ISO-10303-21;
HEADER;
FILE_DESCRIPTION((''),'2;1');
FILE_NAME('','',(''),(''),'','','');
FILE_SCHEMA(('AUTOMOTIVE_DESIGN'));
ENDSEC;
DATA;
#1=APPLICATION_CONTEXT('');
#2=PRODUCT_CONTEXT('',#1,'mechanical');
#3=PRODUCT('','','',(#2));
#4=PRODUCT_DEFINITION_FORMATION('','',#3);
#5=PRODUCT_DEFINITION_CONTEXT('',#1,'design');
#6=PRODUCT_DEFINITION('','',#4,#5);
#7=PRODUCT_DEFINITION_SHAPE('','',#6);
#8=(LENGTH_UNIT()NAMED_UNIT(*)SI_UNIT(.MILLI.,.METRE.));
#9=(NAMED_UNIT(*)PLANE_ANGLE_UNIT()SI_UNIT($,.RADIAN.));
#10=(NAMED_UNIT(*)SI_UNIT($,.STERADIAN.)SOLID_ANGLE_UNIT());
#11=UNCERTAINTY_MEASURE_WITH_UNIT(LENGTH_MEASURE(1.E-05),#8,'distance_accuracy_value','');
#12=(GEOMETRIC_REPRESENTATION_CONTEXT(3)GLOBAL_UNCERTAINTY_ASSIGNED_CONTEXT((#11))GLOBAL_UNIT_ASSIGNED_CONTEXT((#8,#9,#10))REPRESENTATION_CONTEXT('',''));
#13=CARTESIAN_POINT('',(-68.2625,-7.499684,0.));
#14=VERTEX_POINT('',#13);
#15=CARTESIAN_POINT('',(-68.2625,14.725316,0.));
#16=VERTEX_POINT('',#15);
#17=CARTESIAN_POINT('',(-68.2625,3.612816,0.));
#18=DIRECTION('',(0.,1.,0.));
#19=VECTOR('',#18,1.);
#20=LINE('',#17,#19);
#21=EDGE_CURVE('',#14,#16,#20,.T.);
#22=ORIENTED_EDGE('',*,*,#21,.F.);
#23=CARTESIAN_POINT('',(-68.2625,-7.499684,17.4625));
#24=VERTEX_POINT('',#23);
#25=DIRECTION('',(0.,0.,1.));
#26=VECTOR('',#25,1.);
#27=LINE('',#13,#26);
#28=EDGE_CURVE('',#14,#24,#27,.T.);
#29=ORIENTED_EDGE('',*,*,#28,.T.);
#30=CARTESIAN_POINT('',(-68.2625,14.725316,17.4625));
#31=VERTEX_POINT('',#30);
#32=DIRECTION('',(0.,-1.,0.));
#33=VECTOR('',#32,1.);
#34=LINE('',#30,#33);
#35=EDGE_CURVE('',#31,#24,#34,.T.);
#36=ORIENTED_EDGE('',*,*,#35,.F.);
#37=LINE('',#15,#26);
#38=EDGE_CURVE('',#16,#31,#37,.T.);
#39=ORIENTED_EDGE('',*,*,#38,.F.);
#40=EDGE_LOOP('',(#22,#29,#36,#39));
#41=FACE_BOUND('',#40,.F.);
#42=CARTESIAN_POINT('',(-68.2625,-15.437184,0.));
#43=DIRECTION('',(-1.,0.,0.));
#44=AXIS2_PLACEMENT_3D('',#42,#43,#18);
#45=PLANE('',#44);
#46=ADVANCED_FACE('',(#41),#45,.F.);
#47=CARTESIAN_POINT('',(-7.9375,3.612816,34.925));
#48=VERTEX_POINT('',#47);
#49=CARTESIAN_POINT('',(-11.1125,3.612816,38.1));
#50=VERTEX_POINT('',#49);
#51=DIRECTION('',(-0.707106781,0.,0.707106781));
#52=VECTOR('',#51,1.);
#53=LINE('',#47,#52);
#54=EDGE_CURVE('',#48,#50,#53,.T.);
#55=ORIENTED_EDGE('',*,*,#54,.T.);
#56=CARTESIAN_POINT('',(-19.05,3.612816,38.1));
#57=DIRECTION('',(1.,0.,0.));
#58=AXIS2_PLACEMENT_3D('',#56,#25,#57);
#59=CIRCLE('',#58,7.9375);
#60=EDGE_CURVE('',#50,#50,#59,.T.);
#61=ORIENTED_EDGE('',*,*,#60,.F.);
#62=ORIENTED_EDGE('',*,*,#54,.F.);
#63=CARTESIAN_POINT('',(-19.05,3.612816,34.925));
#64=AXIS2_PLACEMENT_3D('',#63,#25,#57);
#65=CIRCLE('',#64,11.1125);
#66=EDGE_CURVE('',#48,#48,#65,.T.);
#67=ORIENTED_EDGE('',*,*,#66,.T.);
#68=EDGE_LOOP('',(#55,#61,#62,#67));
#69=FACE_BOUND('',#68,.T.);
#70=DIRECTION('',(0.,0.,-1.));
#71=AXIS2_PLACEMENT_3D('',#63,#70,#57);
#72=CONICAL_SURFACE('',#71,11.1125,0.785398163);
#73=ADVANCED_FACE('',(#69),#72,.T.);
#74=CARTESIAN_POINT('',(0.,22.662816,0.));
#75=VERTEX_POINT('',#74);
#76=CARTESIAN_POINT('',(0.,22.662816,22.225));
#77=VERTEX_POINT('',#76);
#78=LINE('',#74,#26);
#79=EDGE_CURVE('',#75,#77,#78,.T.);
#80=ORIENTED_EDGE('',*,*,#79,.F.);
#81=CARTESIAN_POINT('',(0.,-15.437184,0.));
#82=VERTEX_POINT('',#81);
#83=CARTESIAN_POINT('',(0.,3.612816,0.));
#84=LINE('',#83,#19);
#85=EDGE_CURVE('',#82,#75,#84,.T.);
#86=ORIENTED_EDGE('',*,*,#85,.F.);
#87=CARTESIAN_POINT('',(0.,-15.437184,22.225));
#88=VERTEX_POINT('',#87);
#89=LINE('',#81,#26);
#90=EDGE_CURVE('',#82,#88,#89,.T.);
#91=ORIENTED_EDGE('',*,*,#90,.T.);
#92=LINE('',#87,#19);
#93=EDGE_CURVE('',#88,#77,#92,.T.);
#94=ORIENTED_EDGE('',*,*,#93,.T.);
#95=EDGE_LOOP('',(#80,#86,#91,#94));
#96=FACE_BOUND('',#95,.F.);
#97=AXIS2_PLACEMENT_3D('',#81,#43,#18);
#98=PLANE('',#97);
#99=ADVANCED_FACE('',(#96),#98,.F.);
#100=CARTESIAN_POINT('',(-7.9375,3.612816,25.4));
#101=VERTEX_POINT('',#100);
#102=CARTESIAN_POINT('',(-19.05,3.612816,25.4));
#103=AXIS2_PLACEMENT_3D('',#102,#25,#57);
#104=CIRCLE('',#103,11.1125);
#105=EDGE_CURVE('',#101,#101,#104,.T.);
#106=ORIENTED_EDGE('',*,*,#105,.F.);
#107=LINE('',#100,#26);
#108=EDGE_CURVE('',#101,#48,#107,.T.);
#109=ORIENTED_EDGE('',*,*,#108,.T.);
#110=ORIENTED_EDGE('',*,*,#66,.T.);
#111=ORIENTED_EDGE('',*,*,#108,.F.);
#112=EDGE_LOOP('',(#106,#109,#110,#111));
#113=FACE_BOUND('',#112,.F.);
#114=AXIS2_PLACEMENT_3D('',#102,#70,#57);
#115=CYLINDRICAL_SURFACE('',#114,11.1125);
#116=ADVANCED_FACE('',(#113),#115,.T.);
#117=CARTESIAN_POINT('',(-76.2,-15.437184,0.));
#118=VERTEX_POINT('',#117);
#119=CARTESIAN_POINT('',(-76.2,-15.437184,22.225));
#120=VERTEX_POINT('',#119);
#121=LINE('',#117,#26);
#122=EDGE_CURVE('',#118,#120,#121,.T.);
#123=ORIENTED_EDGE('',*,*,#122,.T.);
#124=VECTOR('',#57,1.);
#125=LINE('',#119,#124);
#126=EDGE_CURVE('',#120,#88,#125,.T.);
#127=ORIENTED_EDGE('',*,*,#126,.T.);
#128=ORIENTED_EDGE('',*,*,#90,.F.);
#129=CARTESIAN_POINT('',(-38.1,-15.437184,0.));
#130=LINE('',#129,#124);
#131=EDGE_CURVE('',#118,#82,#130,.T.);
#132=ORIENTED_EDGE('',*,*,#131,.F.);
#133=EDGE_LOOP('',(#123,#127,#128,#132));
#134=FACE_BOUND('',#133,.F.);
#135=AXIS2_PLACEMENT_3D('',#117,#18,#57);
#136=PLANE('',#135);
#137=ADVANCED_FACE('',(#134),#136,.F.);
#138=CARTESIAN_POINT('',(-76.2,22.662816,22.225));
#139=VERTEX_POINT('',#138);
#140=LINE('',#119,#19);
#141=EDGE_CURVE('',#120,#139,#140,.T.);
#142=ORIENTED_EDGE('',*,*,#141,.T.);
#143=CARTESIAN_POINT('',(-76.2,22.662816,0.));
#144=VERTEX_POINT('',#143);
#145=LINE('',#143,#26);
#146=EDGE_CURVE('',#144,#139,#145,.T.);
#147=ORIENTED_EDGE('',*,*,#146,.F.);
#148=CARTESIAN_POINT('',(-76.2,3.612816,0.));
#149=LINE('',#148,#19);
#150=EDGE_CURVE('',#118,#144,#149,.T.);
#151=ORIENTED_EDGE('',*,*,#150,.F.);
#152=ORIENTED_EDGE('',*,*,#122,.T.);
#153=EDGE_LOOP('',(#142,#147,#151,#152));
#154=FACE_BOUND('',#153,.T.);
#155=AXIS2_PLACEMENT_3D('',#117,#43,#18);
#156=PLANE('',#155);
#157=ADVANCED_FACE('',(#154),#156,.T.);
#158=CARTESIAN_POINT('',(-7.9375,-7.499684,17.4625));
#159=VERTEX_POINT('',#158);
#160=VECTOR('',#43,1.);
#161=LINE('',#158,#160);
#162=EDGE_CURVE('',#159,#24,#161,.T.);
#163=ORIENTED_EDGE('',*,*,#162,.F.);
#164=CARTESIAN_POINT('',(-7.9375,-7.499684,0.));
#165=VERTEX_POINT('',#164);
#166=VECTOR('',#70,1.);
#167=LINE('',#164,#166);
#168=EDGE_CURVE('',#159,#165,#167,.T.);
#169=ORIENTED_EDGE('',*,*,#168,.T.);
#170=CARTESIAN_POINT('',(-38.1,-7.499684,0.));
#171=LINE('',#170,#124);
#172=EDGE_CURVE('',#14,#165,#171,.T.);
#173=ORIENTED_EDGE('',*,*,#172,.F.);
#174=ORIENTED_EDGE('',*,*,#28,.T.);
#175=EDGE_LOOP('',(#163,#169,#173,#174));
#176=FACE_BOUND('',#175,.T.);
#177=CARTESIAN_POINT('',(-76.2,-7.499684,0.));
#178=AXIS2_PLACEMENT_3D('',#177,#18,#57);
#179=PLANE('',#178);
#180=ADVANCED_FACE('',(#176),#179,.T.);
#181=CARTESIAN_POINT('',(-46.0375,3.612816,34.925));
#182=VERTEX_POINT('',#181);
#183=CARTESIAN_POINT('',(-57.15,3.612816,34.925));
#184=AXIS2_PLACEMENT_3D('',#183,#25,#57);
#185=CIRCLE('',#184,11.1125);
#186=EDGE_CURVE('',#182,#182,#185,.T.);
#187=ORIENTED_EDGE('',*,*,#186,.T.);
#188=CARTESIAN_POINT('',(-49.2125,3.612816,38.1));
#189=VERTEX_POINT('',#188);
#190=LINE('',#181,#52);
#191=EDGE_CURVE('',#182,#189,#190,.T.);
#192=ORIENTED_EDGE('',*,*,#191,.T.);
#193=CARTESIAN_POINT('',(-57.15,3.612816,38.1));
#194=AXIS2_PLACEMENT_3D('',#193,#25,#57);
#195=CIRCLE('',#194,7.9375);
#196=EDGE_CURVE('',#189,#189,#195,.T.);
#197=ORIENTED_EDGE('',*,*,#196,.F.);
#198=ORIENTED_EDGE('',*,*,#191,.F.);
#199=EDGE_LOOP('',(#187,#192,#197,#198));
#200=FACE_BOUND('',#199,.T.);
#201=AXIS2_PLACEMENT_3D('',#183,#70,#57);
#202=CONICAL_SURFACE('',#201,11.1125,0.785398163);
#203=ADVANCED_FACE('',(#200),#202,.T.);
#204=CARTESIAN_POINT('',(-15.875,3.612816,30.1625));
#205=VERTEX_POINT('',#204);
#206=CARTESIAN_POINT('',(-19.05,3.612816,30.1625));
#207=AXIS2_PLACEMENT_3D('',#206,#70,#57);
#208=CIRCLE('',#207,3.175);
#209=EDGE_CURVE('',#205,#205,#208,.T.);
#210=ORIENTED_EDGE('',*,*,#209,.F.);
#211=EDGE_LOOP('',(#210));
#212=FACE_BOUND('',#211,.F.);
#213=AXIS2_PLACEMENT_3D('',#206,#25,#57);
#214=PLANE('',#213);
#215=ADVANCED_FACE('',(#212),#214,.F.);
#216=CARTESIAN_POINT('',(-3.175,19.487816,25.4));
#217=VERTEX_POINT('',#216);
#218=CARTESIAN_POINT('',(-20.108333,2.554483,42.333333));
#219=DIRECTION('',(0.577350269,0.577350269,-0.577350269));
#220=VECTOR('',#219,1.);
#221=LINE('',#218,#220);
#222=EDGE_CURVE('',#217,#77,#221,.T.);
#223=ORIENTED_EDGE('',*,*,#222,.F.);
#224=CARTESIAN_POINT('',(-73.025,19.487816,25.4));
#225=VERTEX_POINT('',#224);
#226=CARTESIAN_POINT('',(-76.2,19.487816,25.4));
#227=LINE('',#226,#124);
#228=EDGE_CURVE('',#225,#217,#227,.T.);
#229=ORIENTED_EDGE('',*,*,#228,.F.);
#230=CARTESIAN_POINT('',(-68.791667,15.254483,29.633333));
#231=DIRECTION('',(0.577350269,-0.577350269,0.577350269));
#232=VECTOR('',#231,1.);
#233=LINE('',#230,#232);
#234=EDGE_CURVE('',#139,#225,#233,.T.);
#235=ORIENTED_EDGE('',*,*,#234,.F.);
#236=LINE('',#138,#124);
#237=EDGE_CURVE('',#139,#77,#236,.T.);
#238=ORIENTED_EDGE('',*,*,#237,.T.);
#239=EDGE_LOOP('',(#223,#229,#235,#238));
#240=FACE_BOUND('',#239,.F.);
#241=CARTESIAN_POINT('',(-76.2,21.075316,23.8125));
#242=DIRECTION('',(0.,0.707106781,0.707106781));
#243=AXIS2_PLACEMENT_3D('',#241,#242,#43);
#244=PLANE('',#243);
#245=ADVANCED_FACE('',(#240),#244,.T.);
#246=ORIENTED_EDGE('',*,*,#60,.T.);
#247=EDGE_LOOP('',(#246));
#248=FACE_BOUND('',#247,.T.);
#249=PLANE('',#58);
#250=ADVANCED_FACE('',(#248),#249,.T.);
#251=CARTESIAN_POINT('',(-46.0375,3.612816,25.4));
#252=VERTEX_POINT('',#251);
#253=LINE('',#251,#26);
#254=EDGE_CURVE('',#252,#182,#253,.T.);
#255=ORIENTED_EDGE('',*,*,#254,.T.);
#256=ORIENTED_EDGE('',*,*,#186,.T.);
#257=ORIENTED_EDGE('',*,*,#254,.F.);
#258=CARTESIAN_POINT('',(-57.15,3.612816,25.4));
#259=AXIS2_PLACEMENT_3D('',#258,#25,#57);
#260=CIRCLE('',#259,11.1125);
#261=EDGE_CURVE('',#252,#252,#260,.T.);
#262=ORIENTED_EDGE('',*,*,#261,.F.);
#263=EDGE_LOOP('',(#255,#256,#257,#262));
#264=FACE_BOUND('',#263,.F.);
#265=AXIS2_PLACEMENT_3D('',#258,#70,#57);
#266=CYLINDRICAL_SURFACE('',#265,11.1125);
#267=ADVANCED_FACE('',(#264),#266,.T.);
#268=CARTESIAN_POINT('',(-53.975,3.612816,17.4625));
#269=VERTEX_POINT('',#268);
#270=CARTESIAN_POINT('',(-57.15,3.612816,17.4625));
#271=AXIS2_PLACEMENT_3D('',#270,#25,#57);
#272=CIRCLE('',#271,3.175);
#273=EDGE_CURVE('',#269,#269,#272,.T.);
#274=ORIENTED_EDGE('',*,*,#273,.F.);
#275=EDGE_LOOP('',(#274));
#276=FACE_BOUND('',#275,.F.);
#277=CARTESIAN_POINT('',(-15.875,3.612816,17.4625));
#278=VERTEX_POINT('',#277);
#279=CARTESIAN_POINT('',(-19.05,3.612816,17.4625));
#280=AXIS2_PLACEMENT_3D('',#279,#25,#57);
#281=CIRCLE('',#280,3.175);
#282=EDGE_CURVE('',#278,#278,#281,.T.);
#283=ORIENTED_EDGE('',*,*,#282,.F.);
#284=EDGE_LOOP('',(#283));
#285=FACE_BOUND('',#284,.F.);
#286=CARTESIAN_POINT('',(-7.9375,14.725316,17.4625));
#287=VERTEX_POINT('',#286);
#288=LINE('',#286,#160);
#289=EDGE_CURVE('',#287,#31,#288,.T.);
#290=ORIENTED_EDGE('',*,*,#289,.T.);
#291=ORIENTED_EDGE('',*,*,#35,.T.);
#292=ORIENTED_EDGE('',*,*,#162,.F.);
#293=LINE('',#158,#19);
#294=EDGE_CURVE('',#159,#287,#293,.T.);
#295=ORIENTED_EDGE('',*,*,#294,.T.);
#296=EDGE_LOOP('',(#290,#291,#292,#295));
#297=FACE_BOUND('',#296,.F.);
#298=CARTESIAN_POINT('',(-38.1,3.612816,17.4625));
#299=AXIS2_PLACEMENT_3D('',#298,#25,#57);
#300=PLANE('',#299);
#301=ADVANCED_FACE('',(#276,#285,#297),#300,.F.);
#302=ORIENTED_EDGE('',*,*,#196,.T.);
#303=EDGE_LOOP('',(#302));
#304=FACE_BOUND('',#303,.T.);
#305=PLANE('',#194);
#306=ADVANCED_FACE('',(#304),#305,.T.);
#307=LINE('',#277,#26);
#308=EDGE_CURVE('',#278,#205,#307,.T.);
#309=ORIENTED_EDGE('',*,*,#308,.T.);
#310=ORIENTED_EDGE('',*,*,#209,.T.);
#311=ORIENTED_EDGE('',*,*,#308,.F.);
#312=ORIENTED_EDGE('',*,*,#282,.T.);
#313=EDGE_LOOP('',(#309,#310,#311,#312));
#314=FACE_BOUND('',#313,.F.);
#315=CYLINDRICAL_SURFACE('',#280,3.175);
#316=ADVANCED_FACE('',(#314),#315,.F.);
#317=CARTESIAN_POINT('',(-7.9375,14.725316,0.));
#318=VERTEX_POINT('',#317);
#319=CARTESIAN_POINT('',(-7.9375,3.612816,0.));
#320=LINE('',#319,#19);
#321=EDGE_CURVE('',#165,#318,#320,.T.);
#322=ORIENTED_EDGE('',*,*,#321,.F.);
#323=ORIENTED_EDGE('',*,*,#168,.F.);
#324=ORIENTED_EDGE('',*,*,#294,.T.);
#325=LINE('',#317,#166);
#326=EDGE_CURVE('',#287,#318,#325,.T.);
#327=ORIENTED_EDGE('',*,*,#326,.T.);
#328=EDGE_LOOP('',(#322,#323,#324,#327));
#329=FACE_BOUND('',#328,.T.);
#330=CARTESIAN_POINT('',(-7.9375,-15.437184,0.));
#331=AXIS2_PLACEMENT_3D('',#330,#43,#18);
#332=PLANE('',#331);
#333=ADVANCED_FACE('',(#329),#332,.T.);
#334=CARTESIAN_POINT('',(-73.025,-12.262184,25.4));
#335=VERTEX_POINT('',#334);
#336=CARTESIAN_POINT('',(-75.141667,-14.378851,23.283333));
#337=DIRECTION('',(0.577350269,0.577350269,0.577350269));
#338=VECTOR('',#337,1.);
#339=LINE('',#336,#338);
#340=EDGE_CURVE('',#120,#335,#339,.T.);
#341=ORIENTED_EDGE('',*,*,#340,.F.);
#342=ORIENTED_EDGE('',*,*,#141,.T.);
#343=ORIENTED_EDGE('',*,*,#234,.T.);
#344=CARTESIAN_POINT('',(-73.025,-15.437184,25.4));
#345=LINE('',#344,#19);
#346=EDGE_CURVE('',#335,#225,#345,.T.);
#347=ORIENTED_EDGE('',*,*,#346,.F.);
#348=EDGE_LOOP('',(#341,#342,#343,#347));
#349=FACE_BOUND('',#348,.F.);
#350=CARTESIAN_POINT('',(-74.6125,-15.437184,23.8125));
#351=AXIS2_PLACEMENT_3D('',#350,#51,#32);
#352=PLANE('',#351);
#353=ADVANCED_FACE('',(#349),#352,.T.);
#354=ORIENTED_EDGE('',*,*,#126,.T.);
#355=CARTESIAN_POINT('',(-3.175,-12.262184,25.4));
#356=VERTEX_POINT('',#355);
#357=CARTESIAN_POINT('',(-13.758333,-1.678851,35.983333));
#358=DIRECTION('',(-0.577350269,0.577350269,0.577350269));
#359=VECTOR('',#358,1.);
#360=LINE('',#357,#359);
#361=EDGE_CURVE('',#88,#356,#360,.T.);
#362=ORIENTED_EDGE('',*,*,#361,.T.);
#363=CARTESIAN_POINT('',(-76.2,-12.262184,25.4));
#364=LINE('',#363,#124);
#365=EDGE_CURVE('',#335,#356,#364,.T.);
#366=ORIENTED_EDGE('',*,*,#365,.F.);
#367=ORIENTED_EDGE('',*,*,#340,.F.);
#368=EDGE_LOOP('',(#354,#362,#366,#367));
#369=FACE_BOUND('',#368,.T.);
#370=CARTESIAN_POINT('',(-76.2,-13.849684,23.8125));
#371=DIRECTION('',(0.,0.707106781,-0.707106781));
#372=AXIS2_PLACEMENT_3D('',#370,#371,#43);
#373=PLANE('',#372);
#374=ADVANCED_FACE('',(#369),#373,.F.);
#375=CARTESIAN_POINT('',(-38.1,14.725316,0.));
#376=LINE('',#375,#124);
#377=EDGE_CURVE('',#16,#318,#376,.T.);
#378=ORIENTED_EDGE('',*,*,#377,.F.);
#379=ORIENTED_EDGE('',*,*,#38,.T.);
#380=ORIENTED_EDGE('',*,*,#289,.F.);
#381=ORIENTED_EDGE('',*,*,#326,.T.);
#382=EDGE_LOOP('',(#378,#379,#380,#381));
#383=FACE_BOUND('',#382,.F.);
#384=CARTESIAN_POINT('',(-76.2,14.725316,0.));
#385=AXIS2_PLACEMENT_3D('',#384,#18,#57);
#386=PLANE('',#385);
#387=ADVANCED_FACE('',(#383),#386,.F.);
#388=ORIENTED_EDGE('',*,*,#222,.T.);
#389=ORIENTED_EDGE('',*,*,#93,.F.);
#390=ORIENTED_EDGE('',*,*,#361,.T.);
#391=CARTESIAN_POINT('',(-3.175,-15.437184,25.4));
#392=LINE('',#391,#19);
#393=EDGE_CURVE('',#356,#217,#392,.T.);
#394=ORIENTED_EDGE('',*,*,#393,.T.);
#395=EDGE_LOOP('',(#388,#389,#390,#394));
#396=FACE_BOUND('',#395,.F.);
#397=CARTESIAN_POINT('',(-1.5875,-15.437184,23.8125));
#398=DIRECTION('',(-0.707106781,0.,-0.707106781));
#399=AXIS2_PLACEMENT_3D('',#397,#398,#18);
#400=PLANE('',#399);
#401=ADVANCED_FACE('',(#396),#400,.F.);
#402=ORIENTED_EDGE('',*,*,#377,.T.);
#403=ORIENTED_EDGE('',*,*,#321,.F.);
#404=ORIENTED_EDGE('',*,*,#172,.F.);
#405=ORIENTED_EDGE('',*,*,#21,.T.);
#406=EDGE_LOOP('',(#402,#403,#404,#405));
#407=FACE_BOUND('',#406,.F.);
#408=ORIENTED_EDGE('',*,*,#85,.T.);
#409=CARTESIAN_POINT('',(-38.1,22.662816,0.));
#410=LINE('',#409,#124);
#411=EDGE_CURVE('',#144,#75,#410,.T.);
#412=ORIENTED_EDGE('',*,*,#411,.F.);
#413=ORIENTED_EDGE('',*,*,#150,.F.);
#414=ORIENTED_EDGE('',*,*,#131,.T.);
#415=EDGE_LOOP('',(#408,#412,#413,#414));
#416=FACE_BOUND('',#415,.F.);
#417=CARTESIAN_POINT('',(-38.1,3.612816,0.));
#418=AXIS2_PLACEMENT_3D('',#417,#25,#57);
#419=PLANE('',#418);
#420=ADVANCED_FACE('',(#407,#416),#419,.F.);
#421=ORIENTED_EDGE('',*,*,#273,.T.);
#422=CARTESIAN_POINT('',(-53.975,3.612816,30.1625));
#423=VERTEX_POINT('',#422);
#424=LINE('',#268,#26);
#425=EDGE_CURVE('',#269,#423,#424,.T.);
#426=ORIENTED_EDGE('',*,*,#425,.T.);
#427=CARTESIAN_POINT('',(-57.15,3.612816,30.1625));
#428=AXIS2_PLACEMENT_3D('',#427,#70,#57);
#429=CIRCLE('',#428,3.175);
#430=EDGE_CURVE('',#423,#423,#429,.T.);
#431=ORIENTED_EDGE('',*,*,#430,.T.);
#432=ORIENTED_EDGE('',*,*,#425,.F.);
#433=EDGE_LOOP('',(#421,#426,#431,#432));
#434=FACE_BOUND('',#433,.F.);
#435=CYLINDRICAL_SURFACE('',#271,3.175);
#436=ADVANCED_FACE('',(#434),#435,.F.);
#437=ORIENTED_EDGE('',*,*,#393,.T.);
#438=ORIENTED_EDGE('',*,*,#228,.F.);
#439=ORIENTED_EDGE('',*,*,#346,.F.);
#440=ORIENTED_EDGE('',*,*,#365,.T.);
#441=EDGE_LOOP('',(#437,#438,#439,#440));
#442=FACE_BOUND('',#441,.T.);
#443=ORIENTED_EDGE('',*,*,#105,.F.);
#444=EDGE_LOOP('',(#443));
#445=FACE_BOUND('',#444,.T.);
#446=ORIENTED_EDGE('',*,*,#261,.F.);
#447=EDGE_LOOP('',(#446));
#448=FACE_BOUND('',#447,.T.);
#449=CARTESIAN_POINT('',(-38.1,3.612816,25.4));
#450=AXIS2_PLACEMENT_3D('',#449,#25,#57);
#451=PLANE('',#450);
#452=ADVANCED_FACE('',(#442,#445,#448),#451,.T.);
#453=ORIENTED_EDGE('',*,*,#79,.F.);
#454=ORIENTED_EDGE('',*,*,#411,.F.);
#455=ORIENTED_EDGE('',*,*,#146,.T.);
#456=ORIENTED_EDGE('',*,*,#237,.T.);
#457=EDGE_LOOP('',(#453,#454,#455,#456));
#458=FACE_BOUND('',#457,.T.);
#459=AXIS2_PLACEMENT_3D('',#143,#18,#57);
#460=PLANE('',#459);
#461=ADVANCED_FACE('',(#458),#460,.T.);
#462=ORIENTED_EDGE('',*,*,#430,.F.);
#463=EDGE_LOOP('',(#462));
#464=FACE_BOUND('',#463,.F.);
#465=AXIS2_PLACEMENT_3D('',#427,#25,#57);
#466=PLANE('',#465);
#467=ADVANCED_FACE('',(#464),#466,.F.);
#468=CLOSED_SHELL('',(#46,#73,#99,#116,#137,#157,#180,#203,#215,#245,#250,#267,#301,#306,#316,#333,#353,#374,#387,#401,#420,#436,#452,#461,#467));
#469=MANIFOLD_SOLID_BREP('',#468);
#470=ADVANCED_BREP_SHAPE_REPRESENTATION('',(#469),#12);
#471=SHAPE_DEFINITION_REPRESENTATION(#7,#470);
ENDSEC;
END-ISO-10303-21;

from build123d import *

# Parameters (mm, degrees)
F0_W     = 76.2
F0_H     = 38.1
F1_DEPTH = 25.4
F2_R     = 11.1125
F3_DEPTH = 12.7
F4_SIZE2 = 3.175
F4_SIZE  = 3.175
F5_T     = 7.9375


# Not quite as in the source:
# - a shell that OpenCascade refuses in one call is made with other operations: the cavity is built on its own and cut out


with BuildPart() as f1:
    # F0 (on Top) → F1 (new body)
    with BuildSketch(Plane.XY):
        with Locations((-38.1, 3.6128160983)):
            Rectangle(F0_W, F0_H)
    extrude(amount=F1_DEPTH)

    # F2 (on face) → F3 (join)
    with BuildSketch(Plane.XY.offset(25.4)):
        with Locations((-57.15, 3.6128160983)):
            Circle(F2_R)
        with Locations((-19.05, 3.6128160983)):
            Circle(F2_R)
    extrude(amount=F3_DEPTH)

    # F4
    f4_edges = [f1.edges().sort_by_distance(p)[0] for p in [
        (-68.2625, 3.612816, 38.1),
        (-30.1625, 3.612816, 38.1),
        (-38.1, -15.437184, 25.4),
        (0, 3.612816, 25.4),
        (-38.1, 22.662816, 25.4),
        (-76.2, 3.612816, 25.4),
    ]]
    chamfer(f4_edges, length=F4_SIZE, length2=F4_SIZE2)

    # F5: shell of thickness 7.9375, made by hand


with BuildPart() as f5_core1:
    # F5_t2: copy of F1
    add(f1.part)

    # the walls: a layer under each face that stays
    f5_faces = [f5_core1.faces().sort_by_distance(p)[0] for p in [
        (0, 3.6128160983, 11.1125),
        (-38.1, -15.4371839017, 11.1125),
        (-1.5875, 3.6128160983, 23.8125),
        (-38.1, 22.6628160983, 11.1125),
        (-76.2, 3.6128160983, 11.1125),
        (-38.1, -13.8496839017, 23.8125),
        (-38.1, 3.6128160983, 25.4),
        (-38.1, 21.0753160983, 23.8125),
        (-74.6125, 3.6128160983, 23.8125),
        (-68.2625, 3.6128160983, 30.1625),
        (-30.1625, 3.6128160983, 30.1625),
        (-66.675, 3.6128160983, 36.5125),
        (-28.575, 3.6128160983, 36.5125),
        (-57.15, 3.6128160983, 38.1),
        (-19.05, 3.6128160983, 38.1),
    ]]
    thicken(f5_faces, amount=-F5_T, mode=Mode.SUBTRACT)

    # F5_s3 → F5_t4 (revolve, cut)
    with BuildSketch(Plane.XZ.offset(-3.6128160983)):
        Polygon((-45.958125, 25.479375), (-46.0375, 17.4625), (-53.975, 17.4625), (-53.975, 25.4), align=None)
    revolve(axis=Axis((-57.15, 3.6128160983, 25.4), (0, 0, 1)), mode=Mode.SUBTRACT)

    # F5_s5 → F5_t6 (revolve, cut)
    with BuildSketch(Plane.XZ.offset(-3.6128160983)):
        Polygon((-7.858125, 25.479375), (-7.9375, 17.4625), (-15.875, 17.4625), (-15.875, 25.4), align=None)
    revolve(axis=Axis((-19.05, 3.6128160983, 25.4), (0, 0, 1)), mode=Mode.SUBTRACT)


with BuildPart() as f1_1:
    add(f1.part)

    # what is left inside the walls is the cavity
    f5_cavity = [f5_core1.part.solids().sort_by_distance(p)[0] for p in [
        (-38.1, -0.091351, 0.079375),
    ]]
    add(f5_cavity, mode=Mode.SUBTRACT)


solid = f1_1.part
